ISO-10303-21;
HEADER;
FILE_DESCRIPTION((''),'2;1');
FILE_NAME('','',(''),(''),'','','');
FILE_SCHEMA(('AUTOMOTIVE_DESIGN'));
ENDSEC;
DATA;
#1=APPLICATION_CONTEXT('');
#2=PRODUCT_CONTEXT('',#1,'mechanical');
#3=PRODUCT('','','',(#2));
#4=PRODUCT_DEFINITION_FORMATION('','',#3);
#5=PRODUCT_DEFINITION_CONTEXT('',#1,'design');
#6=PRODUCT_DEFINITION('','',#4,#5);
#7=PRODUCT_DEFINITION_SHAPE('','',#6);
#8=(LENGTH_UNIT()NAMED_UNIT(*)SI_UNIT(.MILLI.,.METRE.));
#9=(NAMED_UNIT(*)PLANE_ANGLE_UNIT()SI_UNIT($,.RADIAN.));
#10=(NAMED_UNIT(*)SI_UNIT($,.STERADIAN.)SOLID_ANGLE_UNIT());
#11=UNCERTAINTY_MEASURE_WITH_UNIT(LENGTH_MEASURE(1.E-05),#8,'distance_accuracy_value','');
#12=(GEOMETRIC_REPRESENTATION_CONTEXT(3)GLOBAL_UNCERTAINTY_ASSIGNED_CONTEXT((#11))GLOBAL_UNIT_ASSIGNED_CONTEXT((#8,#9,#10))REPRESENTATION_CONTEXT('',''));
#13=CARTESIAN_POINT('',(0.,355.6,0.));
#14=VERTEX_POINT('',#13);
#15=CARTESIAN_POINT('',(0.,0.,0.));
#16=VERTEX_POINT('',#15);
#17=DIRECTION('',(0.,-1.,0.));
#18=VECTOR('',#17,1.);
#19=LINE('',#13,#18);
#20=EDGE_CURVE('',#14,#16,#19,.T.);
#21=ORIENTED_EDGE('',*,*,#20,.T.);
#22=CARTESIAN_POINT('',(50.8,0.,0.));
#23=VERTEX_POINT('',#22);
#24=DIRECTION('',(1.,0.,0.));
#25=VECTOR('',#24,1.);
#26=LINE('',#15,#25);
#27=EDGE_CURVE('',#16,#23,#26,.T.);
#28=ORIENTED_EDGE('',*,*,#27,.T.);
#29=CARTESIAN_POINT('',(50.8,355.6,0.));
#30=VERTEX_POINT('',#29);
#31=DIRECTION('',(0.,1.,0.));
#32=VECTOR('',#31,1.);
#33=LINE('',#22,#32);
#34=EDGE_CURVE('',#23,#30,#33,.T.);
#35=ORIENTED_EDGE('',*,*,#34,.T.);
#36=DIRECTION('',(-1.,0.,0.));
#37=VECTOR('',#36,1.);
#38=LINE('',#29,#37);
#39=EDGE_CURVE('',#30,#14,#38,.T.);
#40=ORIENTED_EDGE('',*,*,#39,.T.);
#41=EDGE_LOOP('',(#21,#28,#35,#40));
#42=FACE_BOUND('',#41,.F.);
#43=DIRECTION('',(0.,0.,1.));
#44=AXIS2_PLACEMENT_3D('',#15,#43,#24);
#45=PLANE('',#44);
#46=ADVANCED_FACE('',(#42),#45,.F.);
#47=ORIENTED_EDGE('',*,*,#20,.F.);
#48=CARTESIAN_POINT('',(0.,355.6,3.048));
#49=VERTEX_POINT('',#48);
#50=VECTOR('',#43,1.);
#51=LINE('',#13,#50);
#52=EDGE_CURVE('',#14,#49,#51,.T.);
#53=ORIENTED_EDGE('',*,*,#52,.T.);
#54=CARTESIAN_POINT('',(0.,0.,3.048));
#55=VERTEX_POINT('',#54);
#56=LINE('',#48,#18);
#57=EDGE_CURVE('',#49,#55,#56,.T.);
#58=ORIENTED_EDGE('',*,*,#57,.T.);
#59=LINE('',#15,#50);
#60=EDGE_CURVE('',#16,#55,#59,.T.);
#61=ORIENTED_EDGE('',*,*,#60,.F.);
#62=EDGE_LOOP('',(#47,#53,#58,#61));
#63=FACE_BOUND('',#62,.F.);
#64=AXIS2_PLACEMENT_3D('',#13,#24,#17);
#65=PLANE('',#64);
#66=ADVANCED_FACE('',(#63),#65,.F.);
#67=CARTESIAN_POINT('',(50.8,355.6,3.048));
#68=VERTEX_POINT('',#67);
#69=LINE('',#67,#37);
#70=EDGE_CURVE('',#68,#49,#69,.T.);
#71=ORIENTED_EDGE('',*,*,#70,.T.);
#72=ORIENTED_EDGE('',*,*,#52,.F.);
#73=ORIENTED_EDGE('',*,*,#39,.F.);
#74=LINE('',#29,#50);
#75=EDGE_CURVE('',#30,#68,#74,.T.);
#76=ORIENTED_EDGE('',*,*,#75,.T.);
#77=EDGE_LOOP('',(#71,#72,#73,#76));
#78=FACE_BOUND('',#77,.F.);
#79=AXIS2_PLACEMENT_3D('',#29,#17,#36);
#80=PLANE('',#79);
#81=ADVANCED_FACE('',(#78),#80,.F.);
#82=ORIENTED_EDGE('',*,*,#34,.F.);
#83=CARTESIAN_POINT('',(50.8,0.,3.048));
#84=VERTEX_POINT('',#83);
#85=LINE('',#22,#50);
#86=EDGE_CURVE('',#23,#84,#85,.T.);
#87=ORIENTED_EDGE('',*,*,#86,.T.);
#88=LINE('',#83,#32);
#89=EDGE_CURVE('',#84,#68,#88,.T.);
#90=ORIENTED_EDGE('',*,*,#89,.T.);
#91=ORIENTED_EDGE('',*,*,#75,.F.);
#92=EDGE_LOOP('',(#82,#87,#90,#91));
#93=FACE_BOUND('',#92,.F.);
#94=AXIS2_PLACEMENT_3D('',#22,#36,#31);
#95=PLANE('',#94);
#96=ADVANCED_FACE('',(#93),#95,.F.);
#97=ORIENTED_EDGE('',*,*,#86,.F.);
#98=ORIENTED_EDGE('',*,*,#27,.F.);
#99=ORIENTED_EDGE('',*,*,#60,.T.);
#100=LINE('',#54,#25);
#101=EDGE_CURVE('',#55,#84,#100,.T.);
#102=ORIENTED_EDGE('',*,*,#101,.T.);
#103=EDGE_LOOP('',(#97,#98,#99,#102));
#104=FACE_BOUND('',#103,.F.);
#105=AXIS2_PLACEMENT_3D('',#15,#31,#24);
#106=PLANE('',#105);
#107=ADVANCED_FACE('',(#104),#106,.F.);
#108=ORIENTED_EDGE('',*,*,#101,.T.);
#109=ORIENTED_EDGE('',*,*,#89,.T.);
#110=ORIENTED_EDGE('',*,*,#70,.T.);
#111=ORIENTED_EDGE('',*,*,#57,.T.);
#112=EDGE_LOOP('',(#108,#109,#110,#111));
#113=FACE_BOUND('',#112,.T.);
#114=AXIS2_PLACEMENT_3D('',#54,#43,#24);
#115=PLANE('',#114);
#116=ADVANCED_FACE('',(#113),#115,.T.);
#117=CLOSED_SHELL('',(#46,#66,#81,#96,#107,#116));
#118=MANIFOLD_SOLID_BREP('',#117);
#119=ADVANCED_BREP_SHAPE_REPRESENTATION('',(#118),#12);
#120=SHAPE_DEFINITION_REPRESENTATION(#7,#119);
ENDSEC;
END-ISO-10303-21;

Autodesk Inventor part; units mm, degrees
ref_plane "YZ Plane" through (0, 0, 0) normal (1, 0, 0) x (0, 1, 0)
ref_plane "XZ Plane" through (0, 0, 0) normal (0, 1, 0) x (-1, 0, 0)
ref_plane "XY Plane" through (0, 0, 0) normal (0, 0, 1) x (1, 0, 0)
sketch "Sketch1" plane through (0, 0, 0) normal (0, 0, 1) x (1, 0, 0)
  line L0 (0, 0) -> (50.8, 0)
  line L1 (50.8, 0) -> (50.8, 355.6)
  line L2 (50.8, 355.6) -> (0, 355.6)
  line L3 (0, 355.6) -> (0, 0)
  dimension "d0" = 50.8
  dimension "d1" = 355.6
extrude "Plate1" add sketch "Sketch1" along normal blind 3.048
equation "\"BendRadius\" = Thickness"
equation "\"BendReliefWidth\" = Thickness"
equation "\"BendReliefDepth\" = 0.5 * Thickness"
equation "\"CornerReliefSize\" = 4 * Thickness"
equation "\"MinimumRemnant\" = 2 * Thickness"
equation "\"TransitionRadius\" = BendRadius"
equation "\"JacobiRadiusSize\" = BendRadius"
equation "\"GapSize\" = Thickness"
equation "\"d2\" = BendRadius"
equation "\"Thickness\" = 3.048"
properties part number "claw arms"
